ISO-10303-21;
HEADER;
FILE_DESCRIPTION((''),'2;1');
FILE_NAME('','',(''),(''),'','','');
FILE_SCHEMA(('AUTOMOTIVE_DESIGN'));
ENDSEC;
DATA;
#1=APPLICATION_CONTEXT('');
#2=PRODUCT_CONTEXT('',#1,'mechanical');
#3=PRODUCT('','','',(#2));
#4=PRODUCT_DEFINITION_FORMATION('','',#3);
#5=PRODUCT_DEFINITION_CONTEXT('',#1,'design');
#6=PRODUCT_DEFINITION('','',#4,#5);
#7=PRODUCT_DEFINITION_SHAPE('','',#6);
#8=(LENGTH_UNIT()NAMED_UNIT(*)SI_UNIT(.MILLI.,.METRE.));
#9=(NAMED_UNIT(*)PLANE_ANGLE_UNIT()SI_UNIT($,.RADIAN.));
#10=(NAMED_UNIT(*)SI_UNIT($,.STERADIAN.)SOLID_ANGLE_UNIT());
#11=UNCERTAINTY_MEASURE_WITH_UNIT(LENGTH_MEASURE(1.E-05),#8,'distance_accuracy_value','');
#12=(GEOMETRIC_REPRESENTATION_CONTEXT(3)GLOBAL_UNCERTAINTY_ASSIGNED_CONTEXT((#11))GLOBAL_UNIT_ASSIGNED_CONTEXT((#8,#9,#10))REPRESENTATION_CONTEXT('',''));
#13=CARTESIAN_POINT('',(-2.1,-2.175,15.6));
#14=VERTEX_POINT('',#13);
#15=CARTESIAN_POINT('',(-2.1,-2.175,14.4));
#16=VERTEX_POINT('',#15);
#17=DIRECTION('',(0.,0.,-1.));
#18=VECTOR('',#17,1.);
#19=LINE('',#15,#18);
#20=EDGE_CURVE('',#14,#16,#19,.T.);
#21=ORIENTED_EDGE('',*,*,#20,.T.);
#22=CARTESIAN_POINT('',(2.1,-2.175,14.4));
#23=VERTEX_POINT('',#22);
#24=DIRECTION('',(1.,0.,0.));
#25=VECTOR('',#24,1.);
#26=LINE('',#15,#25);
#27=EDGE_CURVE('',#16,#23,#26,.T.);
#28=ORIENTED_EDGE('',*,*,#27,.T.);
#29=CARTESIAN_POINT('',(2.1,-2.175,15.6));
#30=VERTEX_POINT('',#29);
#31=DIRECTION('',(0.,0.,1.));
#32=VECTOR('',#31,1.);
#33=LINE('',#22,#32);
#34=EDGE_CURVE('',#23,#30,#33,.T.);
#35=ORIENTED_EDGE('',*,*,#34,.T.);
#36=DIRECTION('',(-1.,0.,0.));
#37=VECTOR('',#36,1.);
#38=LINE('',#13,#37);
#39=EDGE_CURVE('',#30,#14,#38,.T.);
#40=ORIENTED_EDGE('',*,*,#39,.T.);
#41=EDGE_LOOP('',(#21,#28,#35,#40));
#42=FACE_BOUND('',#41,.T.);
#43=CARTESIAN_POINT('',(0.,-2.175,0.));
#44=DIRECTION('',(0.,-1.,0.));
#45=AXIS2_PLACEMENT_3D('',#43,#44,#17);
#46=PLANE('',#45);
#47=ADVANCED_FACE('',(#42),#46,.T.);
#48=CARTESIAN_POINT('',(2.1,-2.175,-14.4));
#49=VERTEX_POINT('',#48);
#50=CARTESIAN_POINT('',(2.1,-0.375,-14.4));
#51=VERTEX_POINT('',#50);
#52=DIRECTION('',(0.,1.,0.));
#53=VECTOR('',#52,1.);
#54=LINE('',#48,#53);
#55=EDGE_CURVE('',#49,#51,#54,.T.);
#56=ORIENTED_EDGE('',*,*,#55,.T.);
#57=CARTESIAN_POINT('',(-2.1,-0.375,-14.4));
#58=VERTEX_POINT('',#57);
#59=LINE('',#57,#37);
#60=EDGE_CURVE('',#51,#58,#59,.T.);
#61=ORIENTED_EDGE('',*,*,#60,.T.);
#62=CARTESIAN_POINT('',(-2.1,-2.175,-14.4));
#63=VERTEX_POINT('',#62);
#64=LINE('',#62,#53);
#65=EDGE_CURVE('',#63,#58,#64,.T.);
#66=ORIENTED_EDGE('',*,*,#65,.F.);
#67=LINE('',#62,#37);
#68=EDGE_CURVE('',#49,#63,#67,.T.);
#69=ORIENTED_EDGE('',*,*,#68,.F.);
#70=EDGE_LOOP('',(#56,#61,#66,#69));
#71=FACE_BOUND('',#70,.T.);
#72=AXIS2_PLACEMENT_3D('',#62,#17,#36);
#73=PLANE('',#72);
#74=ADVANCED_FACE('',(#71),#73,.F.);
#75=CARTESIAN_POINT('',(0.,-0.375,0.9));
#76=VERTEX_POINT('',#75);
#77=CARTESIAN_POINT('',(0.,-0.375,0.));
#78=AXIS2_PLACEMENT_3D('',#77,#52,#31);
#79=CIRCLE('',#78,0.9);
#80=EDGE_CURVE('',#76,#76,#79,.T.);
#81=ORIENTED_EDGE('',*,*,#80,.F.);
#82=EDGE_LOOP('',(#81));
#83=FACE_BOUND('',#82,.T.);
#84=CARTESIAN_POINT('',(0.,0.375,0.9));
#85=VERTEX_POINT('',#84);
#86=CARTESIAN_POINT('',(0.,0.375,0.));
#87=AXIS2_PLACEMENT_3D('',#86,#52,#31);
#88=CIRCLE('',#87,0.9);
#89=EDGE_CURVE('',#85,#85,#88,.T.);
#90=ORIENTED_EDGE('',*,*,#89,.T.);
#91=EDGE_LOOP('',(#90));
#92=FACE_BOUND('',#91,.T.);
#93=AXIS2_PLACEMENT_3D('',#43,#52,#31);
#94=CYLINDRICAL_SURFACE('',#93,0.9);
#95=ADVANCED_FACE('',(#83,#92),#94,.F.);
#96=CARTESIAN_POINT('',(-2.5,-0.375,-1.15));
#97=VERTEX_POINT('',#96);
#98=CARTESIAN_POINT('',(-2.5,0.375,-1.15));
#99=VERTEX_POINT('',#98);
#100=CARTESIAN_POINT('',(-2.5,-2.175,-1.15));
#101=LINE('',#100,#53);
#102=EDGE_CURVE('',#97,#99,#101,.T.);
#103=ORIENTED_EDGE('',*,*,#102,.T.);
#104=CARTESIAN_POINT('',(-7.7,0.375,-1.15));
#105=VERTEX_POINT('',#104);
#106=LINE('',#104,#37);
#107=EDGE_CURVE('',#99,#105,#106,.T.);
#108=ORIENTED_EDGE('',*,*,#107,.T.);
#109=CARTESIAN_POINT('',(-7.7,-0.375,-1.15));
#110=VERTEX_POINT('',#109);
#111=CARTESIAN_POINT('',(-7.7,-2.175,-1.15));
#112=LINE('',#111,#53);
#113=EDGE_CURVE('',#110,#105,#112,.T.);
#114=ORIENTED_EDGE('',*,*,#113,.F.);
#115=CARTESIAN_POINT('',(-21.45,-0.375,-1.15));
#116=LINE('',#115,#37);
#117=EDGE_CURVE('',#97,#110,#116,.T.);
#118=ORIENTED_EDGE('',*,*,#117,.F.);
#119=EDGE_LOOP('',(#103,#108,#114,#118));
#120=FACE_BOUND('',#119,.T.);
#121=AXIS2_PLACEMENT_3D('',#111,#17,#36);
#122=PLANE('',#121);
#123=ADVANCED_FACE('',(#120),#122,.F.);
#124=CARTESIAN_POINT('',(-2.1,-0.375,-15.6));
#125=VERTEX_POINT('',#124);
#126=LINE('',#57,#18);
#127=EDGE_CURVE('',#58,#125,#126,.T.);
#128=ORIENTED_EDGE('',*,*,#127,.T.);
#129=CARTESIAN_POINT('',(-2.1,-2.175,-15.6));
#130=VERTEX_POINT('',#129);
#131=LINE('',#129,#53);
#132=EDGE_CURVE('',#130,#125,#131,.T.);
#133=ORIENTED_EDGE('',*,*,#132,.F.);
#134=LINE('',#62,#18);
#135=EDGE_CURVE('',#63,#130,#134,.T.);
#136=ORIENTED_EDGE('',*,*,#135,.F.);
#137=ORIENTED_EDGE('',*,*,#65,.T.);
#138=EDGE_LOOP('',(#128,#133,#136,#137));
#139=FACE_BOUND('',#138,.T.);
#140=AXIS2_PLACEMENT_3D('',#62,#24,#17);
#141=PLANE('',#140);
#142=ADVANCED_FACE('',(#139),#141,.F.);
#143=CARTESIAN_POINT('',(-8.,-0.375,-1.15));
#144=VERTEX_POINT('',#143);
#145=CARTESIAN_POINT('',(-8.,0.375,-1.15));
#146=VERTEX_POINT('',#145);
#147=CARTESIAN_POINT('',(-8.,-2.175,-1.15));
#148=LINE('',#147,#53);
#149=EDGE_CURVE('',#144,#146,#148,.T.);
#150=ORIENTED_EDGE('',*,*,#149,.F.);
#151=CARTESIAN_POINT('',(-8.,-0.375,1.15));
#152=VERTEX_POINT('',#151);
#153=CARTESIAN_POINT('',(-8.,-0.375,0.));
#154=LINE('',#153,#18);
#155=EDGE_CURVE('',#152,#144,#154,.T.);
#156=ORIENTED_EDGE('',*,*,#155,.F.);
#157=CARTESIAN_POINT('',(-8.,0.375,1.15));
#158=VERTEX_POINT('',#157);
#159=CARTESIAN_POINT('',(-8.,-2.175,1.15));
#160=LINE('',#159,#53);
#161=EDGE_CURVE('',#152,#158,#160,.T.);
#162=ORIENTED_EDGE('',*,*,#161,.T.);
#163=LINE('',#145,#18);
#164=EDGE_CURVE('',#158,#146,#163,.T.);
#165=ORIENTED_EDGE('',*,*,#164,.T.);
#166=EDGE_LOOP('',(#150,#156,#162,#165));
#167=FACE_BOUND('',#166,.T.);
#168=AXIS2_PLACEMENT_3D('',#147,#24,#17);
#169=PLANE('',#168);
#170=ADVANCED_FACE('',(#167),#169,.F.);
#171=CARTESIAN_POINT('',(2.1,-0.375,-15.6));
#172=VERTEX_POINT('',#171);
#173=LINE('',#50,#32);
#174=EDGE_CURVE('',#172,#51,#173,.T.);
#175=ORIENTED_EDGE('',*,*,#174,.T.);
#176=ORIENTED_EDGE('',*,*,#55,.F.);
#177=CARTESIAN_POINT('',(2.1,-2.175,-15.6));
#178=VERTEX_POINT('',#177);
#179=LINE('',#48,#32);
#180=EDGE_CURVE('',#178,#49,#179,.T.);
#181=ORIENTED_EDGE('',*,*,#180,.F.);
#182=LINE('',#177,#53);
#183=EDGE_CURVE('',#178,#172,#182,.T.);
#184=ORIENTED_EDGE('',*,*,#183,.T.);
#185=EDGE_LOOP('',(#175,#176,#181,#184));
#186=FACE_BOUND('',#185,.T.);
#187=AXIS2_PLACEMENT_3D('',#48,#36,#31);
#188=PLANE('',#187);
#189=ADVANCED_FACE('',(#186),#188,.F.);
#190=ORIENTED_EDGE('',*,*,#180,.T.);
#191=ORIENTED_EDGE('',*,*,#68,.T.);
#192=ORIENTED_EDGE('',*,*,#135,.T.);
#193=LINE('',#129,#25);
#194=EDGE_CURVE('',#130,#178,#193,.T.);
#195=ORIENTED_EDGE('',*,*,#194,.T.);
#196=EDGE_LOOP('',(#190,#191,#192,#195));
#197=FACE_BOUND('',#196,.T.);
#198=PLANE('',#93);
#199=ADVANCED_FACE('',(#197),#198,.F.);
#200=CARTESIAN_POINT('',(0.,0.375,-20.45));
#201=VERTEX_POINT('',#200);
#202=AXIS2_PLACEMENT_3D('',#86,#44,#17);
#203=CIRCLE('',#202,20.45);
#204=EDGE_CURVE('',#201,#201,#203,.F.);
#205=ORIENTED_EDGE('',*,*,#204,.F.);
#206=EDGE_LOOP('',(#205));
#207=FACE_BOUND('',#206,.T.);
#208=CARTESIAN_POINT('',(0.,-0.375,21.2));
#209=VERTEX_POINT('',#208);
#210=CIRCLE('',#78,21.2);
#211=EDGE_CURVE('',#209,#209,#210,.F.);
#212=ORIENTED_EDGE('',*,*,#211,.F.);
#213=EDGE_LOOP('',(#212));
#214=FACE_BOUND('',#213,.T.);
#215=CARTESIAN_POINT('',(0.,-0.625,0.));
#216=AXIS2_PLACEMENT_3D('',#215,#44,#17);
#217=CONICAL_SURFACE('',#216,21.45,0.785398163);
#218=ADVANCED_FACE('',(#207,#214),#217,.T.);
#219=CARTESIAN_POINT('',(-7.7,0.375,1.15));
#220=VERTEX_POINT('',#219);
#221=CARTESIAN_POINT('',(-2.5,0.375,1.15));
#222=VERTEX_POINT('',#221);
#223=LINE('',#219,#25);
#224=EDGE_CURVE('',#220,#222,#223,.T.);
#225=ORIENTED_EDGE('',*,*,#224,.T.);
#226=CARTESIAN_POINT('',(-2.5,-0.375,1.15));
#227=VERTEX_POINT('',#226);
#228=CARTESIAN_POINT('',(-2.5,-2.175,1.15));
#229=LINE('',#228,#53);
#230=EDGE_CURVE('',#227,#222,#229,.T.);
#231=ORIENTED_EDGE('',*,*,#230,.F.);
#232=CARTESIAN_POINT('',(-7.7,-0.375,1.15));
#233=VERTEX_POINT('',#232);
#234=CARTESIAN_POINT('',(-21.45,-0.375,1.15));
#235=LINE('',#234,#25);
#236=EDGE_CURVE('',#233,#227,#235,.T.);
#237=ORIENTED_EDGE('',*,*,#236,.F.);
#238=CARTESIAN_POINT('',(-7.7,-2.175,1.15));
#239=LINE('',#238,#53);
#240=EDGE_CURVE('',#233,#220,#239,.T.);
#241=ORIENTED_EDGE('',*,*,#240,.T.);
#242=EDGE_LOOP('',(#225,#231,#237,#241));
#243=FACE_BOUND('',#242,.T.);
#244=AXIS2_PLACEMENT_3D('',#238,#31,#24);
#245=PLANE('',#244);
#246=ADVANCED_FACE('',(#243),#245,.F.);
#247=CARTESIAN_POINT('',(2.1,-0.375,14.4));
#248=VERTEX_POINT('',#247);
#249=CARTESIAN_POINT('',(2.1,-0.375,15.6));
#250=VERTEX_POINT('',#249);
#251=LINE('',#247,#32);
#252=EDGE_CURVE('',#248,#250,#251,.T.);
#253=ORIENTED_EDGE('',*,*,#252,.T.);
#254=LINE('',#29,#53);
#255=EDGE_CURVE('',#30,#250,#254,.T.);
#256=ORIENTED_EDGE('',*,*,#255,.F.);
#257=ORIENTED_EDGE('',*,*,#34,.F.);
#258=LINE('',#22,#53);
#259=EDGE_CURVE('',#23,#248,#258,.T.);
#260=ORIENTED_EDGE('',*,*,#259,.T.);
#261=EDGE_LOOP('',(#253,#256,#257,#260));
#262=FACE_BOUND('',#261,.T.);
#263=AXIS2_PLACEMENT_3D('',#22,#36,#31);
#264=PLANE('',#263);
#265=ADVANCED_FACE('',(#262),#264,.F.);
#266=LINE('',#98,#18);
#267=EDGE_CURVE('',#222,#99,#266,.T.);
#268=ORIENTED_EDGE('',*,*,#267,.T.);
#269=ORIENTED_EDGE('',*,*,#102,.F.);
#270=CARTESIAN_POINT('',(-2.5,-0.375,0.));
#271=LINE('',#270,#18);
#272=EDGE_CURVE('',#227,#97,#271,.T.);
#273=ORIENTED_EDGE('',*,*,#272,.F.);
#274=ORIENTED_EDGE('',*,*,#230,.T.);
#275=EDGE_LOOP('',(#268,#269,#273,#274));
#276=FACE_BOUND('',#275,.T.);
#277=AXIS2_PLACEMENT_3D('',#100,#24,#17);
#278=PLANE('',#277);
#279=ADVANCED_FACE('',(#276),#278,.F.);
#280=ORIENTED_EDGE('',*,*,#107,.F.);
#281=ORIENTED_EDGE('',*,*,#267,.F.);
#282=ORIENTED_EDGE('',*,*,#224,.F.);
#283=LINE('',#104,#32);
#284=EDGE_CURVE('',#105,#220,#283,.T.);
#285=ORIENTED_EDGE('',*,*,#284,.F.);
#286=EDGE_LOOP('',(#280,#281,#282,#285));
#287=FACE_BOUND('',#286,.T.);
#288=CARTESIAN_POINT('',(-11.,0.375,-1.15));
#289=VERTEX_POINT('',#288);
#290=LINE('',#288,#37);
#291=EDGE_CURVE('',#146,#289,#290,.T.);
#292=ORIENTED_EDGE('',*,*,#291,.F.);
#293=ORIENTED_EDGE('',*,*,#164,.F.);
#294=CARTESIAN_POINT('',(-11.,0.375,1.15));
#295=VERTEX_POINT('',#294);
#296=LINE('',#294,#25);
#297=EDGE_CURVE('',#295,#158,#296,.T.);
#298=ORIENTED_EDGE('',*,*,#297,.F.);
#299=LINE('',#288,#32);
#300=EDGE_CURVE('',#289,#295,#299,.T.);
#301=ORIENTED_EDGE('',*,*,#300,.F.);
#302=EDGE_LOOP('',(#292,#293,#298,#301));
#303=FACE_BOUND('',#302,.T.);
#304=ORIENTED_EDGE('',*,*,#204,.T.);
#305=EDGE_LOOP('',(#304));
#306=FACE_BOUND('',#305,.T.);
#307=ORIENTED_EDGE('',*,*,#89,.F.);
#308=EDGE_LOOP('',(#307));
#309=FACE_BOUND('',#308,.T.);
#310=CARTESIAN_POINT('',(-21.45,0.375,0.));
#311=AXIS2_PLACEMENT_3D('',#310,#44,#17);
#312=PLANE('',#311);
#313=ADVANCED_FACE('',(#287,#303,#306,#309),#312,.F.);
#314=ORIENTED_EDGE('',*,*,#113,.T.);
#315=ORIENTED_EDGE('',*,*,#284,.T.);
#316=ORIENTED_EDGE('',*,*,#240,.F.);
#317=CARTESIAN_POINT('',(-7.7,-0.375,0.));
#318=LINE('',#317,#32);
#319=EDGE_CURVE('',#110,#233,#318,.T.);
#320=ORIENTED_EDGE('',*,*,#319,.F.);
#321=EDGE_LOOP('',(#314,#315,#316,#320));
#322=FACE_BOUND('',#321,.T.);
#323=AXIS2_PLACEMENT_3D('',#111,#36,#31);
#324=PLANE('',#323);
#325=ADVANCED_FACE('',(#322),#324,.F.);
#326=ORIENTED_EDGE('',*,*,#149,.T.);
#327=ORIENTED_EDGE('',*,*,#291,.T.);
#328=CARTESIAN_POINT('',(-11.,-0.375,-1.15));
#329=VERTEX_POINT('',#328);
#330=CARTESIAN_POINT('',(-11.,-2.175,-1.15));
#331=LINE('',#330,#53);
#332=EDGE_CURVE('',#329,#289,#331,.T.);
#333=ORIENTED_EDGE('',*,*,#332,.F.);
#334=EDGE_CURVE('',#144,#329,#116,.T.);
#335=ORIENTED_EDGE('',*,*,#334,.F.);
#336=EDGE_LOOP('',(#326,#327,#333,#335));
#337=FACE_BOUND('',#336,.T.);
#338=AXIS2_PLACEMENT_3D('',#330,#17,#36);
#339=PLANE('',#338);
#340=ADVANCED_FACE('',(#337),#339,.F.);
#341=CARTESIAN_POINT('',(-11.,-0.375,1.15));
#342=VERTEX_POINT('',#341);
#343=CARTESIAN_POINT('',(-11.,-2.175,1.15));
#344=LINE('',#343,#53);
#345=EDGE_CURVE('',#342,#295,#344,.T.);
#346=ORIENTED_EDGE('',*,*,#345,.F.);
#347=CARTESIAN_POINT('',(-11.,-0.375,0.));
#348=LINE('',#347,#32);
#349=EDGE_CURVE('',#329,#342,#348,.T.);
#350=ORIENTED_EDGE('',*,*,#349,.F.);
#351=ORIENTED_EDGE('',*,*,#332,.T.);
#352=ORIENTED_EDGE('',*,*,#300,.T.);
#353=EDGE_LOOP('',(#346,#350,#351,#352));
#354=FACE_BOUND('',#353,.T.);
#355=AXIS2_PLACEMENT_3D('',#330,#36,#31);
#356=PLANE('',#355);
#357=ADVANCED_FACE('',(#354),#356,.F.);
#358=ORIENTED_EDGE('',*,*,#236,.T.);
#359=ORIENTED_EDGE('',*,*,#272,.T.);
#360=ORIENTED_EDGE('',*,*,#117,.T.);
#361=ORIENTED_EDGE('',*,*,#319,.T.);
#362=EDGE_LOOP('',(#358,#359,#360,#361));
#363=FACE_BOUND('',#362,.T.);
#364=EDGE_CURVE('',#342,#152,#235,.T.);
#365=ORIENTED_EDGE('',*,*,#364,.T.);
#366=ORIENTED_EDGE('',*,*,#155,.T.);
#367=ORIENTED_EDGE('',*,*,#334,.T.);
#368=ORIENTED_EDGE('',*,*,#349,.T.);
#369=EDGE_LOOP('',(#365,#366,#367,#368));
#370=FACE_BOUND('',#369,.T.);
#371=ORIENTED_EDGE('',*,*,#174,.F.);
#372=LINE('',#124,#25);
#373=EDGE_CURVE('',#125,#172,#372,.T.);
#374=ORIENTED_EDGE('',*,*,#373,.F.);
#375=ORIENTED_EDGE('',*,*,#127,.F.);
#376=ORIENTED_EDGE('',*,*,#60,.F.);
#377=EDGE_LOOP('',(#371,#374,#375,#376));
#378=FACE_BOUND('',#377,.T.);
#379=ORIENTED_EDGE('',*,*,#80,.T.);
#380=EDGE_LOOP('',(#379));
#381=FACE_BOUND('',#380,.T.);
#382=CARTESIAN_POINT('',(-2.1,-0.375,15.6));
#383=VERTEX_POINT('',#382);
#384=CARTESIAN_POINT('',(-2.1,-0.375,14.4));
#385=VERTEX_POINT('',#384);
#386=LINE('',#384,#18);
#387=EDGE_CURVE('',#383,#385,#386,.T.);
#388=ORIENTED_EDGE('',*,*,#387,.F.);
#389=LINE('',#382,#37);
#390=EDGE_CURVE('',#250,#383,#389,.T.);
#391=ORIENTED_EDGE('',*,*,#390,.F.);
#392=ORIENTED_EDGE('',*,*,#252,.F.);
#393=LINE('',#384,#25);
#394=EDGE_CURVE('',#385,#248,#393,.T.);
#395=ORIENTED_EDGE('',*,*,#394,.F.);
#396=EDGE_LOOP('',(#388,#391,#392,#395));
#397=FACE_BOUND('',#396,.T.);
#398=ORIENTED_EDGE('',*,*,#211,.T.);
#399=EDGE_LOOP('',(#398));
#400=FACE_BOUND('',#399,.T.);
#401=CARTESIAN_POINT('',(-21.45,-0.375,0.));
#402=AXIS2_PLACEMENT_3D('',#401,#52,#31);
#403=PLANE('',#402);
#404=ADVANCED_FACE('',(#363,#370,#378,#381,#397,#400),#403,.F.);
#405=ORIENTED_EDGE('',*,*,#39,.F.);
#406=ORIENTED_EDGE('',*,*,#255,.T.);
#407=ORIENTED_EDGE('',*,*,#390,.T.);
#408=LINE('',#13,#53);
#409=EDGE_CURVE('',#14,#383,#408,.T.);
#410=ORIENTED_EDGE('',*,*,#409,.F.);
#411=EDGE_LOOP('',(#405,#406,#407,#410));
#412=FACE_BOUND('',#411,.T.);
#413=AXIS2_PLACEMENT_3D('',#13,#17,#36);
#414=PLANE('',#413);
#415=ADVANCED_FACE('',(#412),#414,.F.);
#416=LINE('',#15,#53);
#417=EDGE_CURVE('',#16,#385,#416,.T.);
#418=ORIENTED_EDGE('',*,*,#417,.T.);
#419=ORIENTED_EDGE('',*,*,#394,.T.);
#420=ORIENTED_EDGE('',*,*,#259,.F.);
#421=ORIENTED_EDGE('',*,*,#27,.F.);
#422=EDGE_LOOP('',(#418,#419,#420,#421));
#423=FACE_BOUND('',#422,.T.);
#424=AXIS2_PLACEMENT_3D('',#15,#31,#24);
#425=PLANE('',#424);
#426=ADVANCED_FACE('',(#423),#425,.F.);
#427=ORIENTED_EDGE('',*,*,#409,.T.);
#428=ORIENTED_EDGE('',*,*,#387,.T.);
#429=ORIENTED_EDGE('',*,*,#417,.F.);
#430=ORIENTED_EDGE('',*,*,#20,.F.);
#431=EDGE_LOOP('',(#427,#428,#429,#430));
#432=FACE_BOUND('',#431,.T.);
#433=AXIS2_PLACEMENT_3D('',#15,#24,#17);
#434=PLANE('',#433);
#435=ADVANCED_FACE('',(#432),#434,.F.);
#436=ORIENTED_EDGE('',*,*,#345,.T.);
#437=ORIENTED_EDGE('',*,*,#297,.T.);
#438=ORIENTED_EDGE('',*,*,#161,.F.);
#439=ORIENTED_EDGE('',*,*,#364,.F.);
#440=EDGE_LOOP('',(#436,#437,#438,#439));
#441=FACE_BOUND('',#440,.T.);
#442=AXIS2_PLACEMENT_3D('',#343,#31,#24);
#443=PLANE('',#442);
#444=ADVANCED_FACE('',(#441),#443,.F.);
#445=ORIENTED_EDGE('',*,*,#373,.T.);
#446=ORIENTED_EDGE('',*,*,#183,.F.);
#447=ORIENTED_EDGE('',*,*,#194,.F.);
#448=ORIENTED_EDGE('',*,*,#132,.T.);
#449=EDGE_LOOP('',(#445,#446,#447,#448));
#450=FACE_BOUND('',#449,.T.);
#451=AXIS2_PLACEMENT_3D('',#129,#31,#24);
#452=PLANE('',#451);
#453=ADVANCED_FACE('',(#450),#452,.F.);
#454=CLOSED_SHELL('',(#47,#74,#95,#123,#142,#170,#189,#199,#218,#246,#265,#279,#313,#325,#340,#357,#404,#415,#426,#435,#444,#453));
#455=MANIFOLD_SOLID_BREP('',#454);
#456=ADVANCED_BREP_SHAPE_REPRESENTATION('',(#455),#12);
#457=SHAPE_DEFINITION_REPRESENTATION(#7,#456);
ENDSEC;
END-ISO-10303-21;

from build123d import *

# Parameters (mm, degrees)
FRONT_W                                  = 21.45
FRONT_H                                  = 0.75
SKETCH1_W                                = 4.2
SKETCH1_H                                = 1.2
HOLDERS_DEPTH                            = 1.8
HOLES_START                              = -0.375
HOLES_MOUNT_CALENDAR_PATTERN_OUTLINE_W   = 3
HOLES_MOUNT_CALENDAR_PATTERN_OUTLINE_H   = 2.3
HOLES_MOUNT_CALENDAR_PATTERN_OUTLINE_W_2 = 5.2
HOLES_MOUNT_CALENDAR_PATTERN_OUTLINE_R   = 0.9
HOLES_MOUNT_CALENDAR_PATTERN_DEPTH       = 0.75
CHAMFER1_SIZE                            = 1


# Read off the part's stored shape, not the designer's step: Holes Mount & Calendar & Pattern
with BuildPart() as part:
    # Front → Base (revolve)
    with BuildSketch(Plane.XY, mode=Mode.PRIVATE) as base_sk:
        with Locations((-10.725, 0)):
            Rectangle(FRONT_W, FRONT_H)
    revolve(base_sk.sketch.rotate(Axis((0, 0, 0), (0, 1, 0)), 270), axis=Axis((0, 0, 0), (0, 1, 0)))

    # Sketch1 → Holders (add)
    with BuildSketch(Plane.XZ.offset(0.375)):
        with Locations((0, 15)):
            Rectangle(SKETCH1_W, SKETCH1_H)
        with Locations((0, -15)):
            Rectangle(SKETCH1_W, SKETCH1_H)
    extrude(amount=HOLDERS_DEPTH)

    # Holes Mount & Calendar & Pattern outline → Holes Mount & Calendar & Pattern (cut)
    with BuildSketch(Plane(origin=(0, 0, 0), x_dir=(1, 0, 0), z_dir=(0, 1, 0)).offset(HOLES_START)):
        with Locations((-9.5, 0)):
            Rectangle(HOLES_MOUNT_CALENDAR_PATTERN_OUTLINE_W, HOLES_MOUNT_CALENDAR_PATTERN_OUTLINE_H)
        with Locations((-5.1, 0)):
            Rectangle(HOLES_MOUNT_CALENDAR_PATTERN_OUTLINE_W_2, HOLES_MOUNT_CALENDAR_PATTERN_OUTLINE_H)
        Circle(HOLES_MOUNT_CALENDAR_PATTERN_OUTLINE_R)
    extrude(amount=HOLES_MOUNT_CALENDAR_PATTERN_DEPTH, mode=Mode.SUBTRACT)

    # Chamfer1
    # the kernel refuses this chamfer: 1 mm, written as the material it takes off along each edge
    with BuildSketch(Plane(origin=(0, 0.375, 0), x_dir=(0, 0, -1), z_dir=(1, 0, 0))) as chamfer1_piece_1:
        Polygon((21.45, -CHAMFER1_SIZE), (21.45 - CHAMFER1_SIZE, 0), (21.45, 0), align=None)
    revolve(axis=Axis((0, 0.375, 0), (0, 1, 0)), mode=Mode.SUBTRACT)


solid = part.part
